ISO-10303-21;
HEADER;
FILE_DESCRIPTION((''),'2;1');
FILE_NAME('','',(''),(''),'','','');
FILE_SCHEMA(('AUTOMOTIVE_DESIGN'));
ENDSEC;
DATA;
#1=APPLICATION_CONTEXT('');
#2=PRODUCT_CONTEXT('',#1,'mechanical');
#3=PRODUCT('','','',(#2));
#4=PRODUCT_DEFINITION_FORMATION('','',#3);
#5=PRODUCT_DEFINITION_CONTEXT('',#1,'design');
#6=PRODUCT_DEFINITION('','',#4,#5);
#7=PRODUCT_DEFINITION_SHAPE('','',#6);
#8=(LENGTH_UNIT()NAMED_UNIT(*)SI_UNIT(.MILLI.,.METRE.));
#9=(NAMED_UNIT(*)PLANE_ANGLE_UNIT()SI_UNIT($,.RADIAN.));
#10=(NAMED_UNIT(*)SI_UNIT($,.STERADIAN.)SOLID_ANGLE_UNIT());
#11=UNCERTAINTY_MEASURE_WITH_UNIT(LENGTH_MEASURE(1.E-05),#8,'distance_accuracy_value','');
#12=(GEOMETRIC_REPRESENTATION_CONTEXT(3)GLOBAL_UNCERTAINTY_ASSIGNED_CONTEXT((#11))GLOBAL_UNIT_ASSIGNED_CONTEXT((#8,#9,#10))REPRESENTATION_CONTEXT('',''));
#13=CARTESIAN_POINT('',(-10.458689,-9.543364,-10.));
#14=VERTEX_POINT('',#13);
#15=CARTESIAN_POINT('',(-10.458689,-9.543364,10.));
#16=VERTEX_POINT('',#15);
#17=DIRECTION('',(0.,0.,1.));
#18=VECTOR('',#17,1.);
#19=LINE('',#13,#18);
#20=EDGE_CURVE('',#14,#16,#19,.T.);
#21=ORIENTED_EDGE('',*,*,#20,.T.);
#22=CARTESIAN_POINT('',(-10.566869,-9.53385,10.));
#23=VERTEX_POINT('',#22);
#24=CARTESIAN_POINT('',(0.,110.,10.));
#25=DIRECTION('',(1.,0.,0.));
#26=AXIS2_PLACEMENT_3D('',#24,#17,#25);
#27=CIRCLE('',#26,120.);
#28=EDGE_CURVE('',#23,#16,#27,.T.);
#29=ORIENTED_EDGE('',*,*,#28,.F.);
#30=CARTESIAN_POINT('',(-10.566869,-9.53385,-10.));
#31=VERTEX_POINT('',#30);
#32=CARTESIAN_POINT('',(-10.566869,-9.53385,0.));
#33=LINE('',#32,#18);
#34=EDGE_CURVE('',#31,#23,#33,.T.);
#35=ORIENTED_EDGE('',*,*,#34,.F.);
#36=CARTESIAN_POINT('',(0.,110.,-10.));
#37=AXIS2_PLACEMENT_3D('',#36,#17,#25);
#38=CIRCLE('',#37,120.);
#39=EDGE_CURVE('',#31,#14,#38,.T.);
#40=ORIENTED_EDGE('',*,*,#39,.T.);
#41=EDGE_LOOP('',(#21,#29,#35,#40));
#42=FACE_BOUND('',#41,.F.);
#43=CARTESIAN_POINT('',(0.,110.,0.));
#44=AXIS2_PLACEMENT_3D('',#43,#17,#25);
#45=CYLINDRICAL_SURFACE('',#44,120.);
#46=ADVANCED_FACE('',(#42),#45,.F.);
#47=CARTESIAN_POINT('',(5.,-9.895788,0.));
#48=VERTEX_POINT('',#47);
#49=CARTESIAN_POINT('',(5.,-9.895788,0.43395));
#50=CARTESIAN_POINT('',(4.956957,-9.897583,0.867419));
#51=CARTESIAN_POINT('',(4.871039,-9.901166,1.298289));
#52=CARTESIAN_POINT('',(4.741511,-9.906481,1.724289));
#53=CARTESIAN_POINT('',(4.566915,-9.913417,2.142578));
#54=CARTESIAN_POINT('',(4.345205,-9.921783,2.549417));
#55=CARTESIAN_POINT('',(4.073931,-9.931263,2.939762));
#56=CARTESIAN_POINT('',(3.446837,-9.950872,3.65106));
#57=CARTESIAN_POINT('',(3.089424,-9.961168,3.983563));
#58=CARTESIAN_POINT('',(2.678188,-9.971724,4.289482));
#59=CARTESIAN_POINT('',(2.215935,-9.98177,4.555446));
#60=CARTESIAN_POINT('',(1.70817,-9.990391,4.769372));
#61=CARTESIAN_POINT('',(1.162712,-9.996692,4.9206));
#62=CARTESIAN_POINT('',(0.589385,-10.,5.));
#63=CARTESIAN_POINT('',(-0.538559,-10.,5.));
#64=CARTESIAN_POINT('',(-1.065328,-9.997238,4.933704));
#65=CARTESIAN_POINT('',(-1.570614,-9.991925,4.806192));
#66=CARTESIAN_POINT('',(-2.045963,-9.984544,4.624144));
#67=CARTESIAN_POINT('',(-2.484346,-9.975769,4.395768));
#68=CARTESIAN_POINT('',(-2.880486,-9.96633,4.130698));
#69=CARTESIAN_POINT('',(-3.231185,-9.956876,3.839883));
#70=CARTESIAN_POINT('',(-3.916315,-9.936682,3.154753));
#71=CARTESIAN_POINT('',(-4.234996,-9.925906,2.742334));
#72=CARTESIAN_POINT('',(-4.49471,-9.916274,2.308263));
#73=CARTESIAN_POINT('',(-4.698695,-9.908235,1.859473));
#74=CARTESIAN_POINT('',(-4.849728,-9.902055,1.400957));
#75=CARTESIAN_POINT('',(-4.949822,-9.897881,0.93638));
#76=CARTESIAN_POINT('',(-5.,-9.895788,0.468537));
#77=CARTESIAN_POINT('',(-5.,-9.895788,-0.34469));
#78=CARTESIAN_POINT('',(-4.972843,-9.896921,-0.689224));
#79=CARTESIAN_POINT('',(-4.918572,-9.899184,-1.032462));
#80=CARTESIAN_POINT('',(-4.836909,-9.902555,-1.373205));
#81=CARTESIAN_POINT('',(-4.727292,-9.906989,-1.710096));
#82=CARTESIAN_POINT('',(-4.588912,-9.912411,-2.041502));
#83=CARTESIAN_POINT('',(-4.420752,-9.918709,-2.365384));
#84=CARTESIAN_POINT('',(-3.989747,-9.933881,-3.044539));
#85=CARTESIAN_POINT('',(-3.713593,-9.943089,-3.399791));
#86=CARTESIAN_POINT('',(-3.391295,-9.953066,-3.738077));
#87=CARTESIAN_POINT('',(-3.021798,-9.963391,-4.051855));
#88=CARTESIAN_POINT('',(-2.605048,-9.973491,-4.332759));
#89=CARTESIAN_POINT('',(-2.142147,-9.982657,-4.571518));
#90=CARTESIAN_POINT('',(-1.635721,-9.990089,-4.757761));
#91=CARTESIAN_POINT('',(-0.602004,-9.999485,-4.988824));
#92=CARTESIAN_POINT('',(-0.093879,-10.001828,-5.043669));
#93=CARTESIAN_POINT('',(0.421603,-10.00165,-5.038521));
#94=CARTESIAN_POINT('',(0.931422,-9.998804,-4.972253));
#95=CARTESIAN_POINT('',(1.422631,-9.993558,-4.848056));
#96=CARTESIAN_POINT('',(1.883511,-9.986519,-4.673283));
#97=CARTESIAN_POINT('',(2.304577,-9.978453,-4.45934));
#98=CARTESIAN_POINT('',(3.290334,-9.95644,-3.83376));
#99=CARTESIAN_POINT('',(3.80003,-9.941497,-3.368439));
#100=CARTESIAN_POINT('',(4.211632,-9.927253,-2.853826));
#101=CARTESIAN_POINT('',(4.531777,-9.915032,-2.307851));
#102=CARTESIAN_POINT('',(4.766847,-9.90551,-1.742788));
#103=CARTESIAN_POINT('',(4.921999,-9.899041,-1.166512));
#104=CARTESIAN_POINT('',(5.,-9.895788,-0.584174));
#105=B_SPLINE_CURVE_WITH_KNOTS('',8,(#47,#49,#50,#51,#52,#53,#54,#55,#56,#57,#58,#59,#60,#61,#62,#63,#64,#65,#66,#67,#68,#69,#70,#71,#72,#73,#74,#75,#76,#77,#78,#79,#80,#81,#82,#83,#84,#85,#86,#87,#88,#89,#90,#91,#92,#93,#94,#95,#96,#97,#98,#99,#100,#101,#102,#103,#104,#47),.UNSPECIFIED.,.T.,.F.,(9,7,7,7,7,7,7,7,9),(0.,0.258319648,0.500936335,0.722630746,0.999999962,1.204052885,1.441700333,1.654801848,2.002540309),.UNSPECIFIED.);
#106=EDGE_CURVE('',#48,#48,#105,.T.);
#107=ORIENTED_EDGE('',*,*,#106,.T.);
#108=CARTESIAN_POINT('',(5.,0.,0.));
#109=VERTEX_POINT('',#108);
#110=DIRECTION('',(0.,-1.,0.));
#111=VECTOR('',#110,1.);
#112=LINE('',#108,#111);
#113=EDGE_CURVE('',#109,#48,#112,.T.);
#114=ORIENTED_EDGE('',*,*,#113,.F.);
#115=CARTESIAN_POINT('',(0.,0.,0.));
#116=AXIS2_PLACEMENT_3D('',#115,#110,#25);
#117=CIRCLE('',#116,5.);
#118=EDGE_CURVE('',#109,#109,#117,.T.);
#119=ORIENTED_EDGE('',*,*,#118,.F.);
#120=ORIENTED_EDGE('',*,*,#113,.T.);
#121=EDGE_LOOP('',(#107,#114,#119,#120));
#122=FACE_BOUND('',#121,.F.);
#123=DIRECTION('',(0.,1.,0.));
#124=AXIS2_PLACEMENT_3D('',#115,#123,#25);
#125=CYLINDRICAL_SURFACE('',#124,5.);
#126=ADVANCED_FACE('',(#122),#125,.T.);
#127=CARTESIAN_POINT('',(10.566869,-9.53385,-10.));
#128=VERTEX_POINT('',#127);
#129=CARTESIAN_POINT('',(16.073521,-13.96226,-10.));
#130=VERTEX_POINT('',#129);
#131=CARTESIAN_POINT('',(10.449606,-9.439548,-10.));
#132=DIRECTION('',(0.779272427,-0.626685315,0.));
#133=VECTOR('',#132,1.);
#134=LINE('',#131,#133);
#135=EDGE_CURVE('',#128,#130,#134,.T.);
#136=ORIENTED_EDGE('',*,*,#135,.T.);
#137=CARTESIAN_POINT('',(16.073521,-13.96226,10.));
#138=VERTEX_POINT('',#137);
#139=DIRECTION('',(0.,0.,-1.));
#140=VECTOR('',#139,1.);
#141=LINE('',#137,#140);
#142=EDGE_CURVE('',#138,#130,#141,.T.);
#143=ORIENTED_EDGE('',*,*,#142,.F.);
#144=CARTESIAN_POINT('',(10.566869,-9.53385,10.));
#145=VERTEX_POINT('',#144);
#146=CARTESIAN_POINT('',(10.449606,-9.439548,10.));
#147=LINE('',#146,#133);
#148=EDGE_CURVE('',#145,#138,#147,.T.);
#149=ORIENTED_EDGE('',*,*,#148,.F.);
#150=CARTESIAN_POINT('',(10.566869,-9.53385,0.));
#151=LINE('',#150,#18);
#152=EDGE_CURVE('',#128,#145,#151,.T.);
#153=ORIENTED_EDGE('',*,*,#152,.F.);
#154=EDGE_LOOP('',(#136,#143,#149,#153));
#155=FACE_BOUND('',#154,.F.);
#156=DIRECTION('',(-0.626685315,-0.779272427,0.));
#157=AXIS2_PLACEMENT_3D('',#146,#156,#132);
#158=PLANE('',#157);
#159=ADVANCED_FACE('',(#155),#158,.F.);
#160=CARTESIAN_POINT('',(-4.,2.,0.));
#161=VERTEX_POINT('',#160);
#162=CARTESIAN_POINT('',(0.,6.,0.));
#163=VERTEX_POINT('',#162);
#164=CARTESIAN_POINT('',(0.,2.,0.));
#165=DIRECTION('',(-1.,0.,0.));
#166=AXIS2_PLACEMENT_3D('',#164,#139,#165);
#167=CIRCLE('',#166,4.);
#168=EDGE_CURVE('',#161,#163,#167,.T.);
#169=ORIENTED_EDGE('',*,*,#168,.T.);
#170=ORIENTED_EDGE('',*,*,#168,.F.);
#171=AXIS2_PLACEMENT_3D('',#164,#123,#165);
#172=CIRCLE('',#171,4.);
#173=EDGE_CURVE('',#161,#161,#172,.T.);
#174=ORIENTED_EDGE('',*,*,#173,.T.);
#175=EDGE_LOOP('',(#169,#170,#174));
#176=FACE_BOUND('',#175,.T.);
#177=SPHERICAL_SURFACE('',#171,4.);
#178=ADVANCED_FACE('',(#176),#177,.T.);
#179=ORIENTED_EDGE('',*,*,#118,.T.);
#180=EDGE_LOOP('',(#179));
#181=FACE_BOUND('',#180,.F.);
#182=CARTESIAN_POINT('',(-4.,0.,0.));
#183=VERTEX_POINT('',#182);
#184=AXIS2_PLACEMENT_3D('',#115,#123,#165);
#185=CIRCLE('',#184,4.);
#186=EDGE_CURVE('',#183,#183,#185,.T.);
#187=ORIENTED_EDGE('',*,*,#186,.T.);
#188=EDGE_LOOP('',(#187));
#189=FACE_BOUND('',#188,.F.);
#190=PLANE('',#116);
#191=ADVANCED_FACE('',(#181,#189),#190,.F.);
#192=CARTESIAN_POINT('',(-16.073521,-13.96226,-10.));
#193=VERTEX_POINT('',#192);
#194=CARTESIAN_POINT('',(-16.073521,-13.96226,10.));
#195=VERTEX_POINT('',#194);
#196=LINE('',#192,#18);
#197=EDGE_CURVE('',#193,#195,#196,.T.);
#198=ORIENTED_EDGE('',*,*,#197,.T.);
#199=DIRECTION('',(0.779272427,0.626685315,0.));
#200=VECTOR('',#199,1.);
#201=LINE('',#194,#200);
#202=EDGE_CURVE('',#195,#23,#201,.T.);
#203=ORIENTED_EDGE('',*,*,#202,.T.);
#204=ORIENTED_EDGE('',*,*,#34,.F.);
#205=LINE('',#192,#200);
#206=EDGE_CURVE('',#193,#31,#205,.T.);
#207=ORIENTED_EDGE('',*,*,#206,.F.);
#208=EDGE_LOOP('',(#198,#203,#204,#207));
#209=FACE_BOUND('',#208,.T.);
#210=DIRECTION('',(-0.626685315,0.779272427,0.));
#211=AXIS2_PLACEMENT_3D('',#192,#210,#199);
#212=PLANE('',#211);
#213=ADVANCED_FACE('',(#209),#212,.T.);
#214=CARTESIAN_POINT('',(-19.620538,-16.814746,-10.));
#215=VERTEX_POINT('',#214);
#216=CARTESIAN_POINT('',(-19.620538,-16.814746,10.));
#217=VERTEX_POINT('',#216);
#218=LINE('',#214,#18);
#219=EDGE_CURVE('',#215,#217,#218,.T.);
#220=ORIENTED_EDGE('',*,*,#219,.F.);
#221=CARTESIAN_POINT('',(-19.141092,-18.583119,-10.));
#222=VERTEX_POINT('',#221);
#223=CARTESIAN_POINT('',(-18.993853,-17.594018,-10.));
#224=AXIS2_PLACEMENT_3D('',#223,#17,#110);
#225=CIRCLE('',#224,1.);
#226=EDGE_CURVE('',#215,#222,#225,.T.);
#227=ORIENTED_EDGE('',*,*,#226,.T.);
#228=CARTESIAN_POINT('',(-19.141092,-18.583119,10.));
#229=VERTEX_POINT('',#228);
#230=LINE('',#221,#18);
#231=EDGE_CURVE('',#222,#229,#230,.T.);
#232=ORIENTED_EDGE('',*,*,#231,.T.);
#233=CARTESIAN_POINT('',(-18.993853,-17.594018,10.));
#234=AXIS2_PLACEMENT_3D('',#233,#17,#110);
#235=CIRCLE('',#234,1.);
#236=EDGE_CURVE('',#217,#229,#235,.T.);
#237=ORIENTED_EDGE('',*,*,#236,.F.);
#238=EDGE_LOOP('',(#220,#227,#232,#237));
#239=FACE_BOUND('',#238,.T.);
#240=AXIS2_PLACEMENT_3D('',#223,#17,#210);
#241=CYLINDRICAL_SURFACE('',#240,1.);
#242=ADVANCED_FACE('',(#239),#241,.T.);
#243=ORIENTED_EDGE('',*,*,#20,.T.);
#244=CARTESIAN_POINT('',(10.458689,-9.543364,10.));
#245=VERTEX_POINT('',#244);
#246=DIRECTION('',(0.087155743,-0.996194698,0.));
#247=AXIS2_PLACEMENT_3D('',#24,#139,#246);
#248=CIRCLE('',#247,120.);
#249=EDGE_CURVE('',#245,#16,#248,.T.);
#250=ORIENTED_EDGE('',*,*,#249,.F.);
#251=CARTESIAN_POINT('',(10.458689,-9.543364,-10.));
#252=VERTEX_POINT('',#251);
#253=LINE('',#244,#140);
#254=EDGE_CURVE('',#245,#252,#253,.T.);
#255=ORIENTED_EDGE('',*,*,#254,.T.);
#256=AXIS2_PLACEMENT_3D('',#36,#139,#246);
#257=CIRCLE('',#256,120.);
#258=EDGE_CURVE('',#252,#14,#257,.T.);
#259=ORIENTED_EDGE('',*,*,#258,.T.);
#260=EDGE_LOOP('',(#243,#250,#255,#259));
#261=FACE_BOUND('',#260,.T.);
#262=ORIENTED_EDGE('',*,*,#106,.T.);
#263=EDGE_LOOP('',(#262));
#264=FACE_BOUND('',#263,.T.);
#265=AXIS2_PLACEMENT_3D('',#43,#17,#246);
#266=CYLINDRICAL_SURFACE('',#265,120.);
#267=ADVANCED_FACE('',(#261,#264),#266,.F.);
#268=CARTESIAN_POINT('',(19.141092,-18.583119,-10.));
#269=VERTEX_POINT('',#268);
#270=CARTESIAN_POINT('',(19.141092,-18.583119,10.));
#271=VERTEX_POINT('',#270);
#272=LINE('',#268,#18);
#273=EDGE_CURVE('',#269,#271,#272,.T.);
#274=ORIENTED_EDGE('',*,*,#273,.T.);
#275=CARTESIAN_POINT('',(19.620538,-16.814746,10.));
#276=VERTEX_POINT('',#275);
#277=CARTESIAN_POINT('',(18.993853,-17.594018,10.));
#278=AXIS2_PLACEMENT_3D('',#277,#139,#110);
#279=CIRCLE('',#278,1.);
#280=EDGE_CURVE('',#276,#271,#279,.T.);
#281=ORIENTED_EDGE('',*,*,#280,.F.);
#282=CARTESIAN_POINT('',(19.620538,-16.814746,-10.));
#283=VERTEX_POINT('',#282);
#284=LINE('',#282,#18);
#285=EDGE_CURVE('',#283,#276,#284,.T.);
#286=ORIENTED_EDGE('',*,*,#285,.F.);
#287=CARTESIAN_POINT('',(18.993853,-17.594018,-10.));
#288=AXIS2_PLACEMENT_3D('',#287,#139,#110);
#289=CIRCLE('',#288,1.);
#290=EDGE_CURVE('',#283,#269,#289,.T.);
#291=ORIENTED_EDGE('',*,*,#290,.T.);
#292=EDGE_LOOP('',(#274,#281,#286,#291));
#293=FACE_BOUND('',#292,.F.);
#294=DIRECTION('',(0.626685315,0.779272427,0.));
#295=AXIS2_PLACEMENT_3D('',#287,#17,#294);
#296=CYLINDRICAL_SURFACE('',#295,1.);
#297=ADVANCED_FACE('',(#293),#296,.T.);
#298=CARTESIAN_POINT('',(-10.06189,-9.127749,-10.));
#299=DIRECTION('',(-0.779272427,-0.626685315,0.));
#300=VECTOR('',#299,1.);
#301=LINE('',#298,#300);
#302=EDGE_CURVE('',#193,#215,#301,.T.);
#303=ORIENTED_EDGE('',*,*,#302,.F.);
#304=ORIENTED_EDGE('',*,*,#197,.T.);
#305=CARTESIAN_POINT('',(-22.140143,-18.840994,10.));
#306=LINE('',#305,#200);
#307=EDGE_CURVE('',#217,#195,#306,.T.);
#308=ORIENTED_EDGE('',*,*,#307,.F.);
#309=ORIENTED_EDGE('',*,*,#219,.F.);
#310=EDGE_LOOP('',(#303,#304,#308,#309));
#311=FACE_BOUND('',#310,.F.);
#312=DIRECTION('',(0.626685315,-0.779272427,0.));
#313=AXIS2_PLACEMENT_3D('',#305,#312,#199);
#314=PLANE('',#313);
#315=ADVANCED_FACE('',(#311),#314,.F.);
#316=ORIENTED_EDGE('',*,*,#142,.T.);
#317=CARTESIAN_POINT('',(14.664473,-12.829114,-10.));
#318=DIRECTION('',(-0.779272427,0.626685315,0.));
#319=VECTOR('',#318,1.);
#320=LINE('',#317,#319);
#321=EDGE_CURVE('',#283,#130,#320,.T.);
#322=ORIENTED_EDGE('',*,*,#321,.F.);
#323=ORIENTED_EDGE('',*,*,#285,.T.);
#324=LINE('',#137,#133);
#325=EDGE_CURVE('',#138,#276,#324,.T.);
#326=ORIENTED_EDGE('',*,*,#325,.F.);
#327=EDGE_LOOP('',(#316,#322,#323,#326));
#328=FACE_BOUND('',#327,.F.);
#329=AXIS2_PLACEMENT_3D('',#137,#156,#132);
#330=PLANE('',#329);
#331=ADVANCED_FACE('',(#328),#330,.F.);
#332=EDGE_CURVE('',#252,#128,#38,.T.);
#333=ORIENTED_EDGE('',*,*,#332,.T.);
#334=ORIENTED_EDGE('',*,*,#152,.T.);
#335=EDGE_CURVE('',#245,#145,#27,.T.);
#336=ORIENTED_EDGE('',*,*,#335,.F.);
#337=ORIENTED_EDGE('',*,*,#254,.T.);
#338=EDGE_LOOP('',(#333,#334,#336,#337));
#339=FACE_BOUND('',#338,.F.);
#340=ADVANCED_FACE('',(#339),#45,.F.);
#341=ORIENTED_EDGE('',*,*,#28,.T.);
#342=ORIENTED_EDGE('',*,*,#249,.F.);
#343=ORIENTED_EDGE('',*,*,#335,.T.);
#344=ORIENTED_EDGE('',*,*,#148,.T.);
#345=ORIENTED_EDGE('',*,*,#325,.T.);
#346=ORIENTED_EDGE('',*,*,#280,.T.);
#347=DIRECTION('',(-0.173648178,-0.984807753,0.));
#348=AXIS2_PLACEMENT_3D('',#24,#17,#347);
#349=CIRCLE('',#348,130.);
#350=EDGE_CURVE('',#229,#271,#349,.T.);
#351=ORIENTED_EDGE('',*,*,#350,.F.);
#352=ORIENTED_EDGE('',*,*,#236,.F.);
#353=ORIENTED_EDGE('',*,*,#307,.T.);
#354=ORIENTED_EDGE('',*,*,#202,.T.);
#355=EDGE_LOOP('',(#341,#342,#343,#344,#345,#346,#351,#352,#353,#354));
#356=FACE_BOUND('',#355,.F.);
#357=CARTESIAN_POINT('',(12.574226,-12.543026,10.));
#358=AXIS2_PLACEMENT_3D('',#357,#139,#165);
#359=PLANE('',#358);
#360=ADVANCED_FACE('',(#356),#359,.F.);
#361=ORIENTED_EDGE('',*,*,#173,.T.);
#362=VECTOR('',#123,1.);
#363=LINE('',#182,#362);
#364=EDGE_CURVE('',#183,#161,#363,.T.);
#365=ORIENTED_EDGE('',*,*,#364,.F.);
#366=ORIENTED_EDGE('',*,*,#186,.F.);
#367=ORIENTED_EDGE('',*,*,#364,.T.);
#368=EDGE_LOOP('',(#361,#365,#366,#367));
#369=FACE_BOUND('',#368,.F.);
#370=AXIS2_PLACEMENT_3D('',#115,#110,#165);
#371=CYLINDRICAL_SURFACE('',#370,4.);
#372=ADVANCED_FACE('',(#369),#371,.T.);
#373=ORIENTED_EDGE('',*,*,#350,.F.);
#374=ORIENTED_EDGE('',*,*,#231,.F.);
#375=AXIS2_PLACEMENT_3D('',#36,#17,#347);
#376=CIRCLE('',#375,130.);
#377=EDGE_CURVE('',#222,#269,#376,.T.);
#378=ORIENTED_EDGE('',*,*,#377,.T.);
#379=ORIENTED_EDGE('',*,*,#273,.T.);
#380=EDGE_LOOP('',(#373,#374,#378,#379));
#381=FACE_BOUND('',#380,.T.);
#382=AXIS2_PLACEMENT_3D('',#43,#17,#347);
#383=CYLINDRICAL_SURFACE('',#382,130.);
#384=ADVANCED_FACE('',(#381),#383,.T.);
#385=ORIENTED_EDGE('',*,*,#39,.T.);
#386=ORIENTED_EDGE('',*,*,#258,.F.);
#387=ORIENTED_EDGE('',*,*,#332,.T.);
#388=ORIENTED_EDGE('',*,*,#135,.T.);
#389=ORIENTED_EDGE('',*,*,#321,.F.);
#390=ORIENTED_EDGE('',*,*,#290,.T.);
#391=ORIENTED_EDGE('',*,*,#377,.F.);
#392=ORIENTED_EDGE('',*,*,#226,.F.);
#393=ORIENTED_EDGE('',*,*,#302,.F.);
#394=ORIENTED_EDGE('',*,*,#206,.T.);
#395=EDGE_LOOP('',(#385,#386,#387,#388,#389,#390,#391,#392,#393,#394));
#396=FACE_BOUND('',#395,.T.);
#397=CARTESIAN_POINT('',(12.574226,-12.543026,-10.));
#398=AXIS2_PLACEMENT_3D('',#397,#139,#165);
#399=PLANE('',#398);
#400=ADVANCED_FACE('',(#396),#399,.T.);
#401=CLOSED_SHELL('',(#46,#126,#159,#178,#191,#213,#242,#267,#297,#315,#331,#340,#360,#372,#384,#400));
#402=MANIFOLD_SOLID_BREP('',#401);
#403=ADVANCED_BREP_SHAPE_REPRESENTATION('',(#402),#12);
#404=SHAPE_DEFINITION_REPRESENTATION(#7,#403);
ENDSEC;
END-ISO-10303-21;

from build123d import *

# Parameters (mm, degrees)
F0_R          = 5
F1_DEPTH      = 10
F2_R          = 4
F3_DEPTH      = 6
F4_R          = 4
F6_DEPTH      = 10
F6_DEPTH_BACK = 10
F7_T4_DEPTH   = 20
F7_S5_R       = 120
F7_T6_DEPTH   = 12
F7_T10_DEPTH  = 20
F7_S11_R      = 120
F7_T12_DEPTH  = 12
F9_DEPTH      = 25
F10_R         = 1


# Not quite as in the source:
# - a fillet or chamfer that OpenCascade refuses, or shapes differently, is made with other operations: its cross-section is extruded or revolved along the edge and cut away or added


with BuildPart() as f1:
    # F0 (on Front) → F1 (new body)
    with BuildSketch(Plane.XZ):
        Circle(F0_R)
    extrude(amount=F1_DEPTH)

    # F2 (on face) → F3 (join)
    with BuildSketch(Plane(origin=(0, 0, 0), x_dir=(-1, 0, 0), z_dir=(0, 1, 0))):
        Circle(F2_R)
    extrude(amount=F3_DEPTH)

    # F4
    f4_edges = [f1.edges().sort_by_distance(p)[0] for p in [
        (4, 6, 0),
    ]]
    fillet(f4_edges, radius=F4_R)

    # F5 (on Top) → F6 (join, two sides)
    with BuildSketch(Plane.XY) as f6_sk:
        with BuildLine():
            ThreePointArc((10.4586891297, -9.543363771), (0, -10), (-10.4586891297, -9.543363771))
            Line((-10.4586891297, -9.543363771), (-10.8944678435, -14.5243372615))
            ThreePointArc((-10.8944678435, -14.5243372615), (-16.3157740275, -13.9306076717), (-21.7060222084, -13.1009691265))
            Line((-21.7060222084, -13.1009691265), (-22.5742630967, -18.0250078916))
            ThreePointArc((-22.5742630967, -18.0250078916), (0, -20), (22.5742630967, -18.0250078916))
            Line((22.5742630967, -18.0250078916), (21.7060222084, -13.1009691265))
            ThreePointArc((21.7060222084, -13.1009691265), (16.3157740275, -13.9306076717), (10.8944678435, -14.5243372615))
            Line((10.8944678435, -14.5243372615), (10.4586891297, -9.543363771))
        make_face()
    extrude(amount=F6_DEPTH)
    extrude(f6_sk.sketch, amount=-F6_DEPTH_BACK)

    # F7: chamfer of 5 on 2 edges, made by hand


with BuildPart() as f7_tool2:
    # F7_s3 → F7_t4 (new body)
    with BuildSketch(Plane.XY.offset(-10)):
        with BuildLine():
            Line((-16.0735207845, -13.962260102), (-10.4496064627, -9.4395484116))
            Line((-10.4496064627, -9.4395484116), (-10.8944678435, -14.5243372615))
            ThreePointArc((-10.8944678435, -14.5243372615), (-13.5571939783, -14.262635138), (-16.0735207845, -13.962260102))
        make_face()
    extrude(amount=F7_T4_DEPTH)

    # F7_s5 → F7_t6 (cut, symmetric)
    with BuildSketch(Plane.XY):
        with Locations((0, 110)):
            Circle(F7_S5_R)
    extrude(amount=F7_T6_DEPTH, both=True, mode=Mode.SUBTRACT)


with BuildPart() as f1_1:
    add(f1.part)

    # F7_t1: union F7_tool2
    add(f7_tool2.part)


with BuildPart() as f7_tool8:
    # F7_s9 → F7_t10 (new body)
    with BuildSketch(Plane.XY.offset(10)):
        with BuildLine():
            Line((10.4496064627, -9.4395484116), (16.0735207845, -13.962260102))
            ThreePointArc((16.0735207845, -13.962260102), (13.5571939783, -14.262635138), (10.8944678435, -14.5243372615))
            Line((10.8944678435, -14.5243372615), (10.4496064627, -9.4395484116))
        make_face()
    extrude(amount=-F7_T10_DEPTH)

    # F7_s11 → F7_t12 (cut, symmetric)
    with BuildSketch(Plane.XY):
        with Locations((0, 110)):
            Circle(F7_S11_R)
    extrude(amount=F7_T12_DEPTH, both=True, mode=Mode.SUBTRACT)


with BuildPart() as f1_2:
    add(f1_1.part)

    # F7_t7: union F7_tool8
    add(f7_tool8.part)

    # F8 (on face) → F9 (cut)
    with BuildSketch(Plane.XY.offset(10)):
        Polygon((-22.1401426525, -18.8409940359), (-16.0735207845, -13.962260102), (-26.2115597725, -8.7402015924), (-26.2115597725, -18.8409940359), align=None)
        Polygon((26.2115597725, -8.7402015924), (16.0735207845, -13.962260102), (22.1401426525, -18.8409940359), (26.2115597725, -18.8409940359), align=None)
    extrude(amount=-F9_DEPTH, mode=Mode.SUBTRACT)

    # F10
    f10_edges = [f1_2.edges().sort_by_distance(p)[0] for p in [
        (-21.380167, -18.229827, 0),
        (21.380167, -18.229827, 0),
    ]]
    fillet(f10_edges, radius=F10_R)


solid = f1_2.part
